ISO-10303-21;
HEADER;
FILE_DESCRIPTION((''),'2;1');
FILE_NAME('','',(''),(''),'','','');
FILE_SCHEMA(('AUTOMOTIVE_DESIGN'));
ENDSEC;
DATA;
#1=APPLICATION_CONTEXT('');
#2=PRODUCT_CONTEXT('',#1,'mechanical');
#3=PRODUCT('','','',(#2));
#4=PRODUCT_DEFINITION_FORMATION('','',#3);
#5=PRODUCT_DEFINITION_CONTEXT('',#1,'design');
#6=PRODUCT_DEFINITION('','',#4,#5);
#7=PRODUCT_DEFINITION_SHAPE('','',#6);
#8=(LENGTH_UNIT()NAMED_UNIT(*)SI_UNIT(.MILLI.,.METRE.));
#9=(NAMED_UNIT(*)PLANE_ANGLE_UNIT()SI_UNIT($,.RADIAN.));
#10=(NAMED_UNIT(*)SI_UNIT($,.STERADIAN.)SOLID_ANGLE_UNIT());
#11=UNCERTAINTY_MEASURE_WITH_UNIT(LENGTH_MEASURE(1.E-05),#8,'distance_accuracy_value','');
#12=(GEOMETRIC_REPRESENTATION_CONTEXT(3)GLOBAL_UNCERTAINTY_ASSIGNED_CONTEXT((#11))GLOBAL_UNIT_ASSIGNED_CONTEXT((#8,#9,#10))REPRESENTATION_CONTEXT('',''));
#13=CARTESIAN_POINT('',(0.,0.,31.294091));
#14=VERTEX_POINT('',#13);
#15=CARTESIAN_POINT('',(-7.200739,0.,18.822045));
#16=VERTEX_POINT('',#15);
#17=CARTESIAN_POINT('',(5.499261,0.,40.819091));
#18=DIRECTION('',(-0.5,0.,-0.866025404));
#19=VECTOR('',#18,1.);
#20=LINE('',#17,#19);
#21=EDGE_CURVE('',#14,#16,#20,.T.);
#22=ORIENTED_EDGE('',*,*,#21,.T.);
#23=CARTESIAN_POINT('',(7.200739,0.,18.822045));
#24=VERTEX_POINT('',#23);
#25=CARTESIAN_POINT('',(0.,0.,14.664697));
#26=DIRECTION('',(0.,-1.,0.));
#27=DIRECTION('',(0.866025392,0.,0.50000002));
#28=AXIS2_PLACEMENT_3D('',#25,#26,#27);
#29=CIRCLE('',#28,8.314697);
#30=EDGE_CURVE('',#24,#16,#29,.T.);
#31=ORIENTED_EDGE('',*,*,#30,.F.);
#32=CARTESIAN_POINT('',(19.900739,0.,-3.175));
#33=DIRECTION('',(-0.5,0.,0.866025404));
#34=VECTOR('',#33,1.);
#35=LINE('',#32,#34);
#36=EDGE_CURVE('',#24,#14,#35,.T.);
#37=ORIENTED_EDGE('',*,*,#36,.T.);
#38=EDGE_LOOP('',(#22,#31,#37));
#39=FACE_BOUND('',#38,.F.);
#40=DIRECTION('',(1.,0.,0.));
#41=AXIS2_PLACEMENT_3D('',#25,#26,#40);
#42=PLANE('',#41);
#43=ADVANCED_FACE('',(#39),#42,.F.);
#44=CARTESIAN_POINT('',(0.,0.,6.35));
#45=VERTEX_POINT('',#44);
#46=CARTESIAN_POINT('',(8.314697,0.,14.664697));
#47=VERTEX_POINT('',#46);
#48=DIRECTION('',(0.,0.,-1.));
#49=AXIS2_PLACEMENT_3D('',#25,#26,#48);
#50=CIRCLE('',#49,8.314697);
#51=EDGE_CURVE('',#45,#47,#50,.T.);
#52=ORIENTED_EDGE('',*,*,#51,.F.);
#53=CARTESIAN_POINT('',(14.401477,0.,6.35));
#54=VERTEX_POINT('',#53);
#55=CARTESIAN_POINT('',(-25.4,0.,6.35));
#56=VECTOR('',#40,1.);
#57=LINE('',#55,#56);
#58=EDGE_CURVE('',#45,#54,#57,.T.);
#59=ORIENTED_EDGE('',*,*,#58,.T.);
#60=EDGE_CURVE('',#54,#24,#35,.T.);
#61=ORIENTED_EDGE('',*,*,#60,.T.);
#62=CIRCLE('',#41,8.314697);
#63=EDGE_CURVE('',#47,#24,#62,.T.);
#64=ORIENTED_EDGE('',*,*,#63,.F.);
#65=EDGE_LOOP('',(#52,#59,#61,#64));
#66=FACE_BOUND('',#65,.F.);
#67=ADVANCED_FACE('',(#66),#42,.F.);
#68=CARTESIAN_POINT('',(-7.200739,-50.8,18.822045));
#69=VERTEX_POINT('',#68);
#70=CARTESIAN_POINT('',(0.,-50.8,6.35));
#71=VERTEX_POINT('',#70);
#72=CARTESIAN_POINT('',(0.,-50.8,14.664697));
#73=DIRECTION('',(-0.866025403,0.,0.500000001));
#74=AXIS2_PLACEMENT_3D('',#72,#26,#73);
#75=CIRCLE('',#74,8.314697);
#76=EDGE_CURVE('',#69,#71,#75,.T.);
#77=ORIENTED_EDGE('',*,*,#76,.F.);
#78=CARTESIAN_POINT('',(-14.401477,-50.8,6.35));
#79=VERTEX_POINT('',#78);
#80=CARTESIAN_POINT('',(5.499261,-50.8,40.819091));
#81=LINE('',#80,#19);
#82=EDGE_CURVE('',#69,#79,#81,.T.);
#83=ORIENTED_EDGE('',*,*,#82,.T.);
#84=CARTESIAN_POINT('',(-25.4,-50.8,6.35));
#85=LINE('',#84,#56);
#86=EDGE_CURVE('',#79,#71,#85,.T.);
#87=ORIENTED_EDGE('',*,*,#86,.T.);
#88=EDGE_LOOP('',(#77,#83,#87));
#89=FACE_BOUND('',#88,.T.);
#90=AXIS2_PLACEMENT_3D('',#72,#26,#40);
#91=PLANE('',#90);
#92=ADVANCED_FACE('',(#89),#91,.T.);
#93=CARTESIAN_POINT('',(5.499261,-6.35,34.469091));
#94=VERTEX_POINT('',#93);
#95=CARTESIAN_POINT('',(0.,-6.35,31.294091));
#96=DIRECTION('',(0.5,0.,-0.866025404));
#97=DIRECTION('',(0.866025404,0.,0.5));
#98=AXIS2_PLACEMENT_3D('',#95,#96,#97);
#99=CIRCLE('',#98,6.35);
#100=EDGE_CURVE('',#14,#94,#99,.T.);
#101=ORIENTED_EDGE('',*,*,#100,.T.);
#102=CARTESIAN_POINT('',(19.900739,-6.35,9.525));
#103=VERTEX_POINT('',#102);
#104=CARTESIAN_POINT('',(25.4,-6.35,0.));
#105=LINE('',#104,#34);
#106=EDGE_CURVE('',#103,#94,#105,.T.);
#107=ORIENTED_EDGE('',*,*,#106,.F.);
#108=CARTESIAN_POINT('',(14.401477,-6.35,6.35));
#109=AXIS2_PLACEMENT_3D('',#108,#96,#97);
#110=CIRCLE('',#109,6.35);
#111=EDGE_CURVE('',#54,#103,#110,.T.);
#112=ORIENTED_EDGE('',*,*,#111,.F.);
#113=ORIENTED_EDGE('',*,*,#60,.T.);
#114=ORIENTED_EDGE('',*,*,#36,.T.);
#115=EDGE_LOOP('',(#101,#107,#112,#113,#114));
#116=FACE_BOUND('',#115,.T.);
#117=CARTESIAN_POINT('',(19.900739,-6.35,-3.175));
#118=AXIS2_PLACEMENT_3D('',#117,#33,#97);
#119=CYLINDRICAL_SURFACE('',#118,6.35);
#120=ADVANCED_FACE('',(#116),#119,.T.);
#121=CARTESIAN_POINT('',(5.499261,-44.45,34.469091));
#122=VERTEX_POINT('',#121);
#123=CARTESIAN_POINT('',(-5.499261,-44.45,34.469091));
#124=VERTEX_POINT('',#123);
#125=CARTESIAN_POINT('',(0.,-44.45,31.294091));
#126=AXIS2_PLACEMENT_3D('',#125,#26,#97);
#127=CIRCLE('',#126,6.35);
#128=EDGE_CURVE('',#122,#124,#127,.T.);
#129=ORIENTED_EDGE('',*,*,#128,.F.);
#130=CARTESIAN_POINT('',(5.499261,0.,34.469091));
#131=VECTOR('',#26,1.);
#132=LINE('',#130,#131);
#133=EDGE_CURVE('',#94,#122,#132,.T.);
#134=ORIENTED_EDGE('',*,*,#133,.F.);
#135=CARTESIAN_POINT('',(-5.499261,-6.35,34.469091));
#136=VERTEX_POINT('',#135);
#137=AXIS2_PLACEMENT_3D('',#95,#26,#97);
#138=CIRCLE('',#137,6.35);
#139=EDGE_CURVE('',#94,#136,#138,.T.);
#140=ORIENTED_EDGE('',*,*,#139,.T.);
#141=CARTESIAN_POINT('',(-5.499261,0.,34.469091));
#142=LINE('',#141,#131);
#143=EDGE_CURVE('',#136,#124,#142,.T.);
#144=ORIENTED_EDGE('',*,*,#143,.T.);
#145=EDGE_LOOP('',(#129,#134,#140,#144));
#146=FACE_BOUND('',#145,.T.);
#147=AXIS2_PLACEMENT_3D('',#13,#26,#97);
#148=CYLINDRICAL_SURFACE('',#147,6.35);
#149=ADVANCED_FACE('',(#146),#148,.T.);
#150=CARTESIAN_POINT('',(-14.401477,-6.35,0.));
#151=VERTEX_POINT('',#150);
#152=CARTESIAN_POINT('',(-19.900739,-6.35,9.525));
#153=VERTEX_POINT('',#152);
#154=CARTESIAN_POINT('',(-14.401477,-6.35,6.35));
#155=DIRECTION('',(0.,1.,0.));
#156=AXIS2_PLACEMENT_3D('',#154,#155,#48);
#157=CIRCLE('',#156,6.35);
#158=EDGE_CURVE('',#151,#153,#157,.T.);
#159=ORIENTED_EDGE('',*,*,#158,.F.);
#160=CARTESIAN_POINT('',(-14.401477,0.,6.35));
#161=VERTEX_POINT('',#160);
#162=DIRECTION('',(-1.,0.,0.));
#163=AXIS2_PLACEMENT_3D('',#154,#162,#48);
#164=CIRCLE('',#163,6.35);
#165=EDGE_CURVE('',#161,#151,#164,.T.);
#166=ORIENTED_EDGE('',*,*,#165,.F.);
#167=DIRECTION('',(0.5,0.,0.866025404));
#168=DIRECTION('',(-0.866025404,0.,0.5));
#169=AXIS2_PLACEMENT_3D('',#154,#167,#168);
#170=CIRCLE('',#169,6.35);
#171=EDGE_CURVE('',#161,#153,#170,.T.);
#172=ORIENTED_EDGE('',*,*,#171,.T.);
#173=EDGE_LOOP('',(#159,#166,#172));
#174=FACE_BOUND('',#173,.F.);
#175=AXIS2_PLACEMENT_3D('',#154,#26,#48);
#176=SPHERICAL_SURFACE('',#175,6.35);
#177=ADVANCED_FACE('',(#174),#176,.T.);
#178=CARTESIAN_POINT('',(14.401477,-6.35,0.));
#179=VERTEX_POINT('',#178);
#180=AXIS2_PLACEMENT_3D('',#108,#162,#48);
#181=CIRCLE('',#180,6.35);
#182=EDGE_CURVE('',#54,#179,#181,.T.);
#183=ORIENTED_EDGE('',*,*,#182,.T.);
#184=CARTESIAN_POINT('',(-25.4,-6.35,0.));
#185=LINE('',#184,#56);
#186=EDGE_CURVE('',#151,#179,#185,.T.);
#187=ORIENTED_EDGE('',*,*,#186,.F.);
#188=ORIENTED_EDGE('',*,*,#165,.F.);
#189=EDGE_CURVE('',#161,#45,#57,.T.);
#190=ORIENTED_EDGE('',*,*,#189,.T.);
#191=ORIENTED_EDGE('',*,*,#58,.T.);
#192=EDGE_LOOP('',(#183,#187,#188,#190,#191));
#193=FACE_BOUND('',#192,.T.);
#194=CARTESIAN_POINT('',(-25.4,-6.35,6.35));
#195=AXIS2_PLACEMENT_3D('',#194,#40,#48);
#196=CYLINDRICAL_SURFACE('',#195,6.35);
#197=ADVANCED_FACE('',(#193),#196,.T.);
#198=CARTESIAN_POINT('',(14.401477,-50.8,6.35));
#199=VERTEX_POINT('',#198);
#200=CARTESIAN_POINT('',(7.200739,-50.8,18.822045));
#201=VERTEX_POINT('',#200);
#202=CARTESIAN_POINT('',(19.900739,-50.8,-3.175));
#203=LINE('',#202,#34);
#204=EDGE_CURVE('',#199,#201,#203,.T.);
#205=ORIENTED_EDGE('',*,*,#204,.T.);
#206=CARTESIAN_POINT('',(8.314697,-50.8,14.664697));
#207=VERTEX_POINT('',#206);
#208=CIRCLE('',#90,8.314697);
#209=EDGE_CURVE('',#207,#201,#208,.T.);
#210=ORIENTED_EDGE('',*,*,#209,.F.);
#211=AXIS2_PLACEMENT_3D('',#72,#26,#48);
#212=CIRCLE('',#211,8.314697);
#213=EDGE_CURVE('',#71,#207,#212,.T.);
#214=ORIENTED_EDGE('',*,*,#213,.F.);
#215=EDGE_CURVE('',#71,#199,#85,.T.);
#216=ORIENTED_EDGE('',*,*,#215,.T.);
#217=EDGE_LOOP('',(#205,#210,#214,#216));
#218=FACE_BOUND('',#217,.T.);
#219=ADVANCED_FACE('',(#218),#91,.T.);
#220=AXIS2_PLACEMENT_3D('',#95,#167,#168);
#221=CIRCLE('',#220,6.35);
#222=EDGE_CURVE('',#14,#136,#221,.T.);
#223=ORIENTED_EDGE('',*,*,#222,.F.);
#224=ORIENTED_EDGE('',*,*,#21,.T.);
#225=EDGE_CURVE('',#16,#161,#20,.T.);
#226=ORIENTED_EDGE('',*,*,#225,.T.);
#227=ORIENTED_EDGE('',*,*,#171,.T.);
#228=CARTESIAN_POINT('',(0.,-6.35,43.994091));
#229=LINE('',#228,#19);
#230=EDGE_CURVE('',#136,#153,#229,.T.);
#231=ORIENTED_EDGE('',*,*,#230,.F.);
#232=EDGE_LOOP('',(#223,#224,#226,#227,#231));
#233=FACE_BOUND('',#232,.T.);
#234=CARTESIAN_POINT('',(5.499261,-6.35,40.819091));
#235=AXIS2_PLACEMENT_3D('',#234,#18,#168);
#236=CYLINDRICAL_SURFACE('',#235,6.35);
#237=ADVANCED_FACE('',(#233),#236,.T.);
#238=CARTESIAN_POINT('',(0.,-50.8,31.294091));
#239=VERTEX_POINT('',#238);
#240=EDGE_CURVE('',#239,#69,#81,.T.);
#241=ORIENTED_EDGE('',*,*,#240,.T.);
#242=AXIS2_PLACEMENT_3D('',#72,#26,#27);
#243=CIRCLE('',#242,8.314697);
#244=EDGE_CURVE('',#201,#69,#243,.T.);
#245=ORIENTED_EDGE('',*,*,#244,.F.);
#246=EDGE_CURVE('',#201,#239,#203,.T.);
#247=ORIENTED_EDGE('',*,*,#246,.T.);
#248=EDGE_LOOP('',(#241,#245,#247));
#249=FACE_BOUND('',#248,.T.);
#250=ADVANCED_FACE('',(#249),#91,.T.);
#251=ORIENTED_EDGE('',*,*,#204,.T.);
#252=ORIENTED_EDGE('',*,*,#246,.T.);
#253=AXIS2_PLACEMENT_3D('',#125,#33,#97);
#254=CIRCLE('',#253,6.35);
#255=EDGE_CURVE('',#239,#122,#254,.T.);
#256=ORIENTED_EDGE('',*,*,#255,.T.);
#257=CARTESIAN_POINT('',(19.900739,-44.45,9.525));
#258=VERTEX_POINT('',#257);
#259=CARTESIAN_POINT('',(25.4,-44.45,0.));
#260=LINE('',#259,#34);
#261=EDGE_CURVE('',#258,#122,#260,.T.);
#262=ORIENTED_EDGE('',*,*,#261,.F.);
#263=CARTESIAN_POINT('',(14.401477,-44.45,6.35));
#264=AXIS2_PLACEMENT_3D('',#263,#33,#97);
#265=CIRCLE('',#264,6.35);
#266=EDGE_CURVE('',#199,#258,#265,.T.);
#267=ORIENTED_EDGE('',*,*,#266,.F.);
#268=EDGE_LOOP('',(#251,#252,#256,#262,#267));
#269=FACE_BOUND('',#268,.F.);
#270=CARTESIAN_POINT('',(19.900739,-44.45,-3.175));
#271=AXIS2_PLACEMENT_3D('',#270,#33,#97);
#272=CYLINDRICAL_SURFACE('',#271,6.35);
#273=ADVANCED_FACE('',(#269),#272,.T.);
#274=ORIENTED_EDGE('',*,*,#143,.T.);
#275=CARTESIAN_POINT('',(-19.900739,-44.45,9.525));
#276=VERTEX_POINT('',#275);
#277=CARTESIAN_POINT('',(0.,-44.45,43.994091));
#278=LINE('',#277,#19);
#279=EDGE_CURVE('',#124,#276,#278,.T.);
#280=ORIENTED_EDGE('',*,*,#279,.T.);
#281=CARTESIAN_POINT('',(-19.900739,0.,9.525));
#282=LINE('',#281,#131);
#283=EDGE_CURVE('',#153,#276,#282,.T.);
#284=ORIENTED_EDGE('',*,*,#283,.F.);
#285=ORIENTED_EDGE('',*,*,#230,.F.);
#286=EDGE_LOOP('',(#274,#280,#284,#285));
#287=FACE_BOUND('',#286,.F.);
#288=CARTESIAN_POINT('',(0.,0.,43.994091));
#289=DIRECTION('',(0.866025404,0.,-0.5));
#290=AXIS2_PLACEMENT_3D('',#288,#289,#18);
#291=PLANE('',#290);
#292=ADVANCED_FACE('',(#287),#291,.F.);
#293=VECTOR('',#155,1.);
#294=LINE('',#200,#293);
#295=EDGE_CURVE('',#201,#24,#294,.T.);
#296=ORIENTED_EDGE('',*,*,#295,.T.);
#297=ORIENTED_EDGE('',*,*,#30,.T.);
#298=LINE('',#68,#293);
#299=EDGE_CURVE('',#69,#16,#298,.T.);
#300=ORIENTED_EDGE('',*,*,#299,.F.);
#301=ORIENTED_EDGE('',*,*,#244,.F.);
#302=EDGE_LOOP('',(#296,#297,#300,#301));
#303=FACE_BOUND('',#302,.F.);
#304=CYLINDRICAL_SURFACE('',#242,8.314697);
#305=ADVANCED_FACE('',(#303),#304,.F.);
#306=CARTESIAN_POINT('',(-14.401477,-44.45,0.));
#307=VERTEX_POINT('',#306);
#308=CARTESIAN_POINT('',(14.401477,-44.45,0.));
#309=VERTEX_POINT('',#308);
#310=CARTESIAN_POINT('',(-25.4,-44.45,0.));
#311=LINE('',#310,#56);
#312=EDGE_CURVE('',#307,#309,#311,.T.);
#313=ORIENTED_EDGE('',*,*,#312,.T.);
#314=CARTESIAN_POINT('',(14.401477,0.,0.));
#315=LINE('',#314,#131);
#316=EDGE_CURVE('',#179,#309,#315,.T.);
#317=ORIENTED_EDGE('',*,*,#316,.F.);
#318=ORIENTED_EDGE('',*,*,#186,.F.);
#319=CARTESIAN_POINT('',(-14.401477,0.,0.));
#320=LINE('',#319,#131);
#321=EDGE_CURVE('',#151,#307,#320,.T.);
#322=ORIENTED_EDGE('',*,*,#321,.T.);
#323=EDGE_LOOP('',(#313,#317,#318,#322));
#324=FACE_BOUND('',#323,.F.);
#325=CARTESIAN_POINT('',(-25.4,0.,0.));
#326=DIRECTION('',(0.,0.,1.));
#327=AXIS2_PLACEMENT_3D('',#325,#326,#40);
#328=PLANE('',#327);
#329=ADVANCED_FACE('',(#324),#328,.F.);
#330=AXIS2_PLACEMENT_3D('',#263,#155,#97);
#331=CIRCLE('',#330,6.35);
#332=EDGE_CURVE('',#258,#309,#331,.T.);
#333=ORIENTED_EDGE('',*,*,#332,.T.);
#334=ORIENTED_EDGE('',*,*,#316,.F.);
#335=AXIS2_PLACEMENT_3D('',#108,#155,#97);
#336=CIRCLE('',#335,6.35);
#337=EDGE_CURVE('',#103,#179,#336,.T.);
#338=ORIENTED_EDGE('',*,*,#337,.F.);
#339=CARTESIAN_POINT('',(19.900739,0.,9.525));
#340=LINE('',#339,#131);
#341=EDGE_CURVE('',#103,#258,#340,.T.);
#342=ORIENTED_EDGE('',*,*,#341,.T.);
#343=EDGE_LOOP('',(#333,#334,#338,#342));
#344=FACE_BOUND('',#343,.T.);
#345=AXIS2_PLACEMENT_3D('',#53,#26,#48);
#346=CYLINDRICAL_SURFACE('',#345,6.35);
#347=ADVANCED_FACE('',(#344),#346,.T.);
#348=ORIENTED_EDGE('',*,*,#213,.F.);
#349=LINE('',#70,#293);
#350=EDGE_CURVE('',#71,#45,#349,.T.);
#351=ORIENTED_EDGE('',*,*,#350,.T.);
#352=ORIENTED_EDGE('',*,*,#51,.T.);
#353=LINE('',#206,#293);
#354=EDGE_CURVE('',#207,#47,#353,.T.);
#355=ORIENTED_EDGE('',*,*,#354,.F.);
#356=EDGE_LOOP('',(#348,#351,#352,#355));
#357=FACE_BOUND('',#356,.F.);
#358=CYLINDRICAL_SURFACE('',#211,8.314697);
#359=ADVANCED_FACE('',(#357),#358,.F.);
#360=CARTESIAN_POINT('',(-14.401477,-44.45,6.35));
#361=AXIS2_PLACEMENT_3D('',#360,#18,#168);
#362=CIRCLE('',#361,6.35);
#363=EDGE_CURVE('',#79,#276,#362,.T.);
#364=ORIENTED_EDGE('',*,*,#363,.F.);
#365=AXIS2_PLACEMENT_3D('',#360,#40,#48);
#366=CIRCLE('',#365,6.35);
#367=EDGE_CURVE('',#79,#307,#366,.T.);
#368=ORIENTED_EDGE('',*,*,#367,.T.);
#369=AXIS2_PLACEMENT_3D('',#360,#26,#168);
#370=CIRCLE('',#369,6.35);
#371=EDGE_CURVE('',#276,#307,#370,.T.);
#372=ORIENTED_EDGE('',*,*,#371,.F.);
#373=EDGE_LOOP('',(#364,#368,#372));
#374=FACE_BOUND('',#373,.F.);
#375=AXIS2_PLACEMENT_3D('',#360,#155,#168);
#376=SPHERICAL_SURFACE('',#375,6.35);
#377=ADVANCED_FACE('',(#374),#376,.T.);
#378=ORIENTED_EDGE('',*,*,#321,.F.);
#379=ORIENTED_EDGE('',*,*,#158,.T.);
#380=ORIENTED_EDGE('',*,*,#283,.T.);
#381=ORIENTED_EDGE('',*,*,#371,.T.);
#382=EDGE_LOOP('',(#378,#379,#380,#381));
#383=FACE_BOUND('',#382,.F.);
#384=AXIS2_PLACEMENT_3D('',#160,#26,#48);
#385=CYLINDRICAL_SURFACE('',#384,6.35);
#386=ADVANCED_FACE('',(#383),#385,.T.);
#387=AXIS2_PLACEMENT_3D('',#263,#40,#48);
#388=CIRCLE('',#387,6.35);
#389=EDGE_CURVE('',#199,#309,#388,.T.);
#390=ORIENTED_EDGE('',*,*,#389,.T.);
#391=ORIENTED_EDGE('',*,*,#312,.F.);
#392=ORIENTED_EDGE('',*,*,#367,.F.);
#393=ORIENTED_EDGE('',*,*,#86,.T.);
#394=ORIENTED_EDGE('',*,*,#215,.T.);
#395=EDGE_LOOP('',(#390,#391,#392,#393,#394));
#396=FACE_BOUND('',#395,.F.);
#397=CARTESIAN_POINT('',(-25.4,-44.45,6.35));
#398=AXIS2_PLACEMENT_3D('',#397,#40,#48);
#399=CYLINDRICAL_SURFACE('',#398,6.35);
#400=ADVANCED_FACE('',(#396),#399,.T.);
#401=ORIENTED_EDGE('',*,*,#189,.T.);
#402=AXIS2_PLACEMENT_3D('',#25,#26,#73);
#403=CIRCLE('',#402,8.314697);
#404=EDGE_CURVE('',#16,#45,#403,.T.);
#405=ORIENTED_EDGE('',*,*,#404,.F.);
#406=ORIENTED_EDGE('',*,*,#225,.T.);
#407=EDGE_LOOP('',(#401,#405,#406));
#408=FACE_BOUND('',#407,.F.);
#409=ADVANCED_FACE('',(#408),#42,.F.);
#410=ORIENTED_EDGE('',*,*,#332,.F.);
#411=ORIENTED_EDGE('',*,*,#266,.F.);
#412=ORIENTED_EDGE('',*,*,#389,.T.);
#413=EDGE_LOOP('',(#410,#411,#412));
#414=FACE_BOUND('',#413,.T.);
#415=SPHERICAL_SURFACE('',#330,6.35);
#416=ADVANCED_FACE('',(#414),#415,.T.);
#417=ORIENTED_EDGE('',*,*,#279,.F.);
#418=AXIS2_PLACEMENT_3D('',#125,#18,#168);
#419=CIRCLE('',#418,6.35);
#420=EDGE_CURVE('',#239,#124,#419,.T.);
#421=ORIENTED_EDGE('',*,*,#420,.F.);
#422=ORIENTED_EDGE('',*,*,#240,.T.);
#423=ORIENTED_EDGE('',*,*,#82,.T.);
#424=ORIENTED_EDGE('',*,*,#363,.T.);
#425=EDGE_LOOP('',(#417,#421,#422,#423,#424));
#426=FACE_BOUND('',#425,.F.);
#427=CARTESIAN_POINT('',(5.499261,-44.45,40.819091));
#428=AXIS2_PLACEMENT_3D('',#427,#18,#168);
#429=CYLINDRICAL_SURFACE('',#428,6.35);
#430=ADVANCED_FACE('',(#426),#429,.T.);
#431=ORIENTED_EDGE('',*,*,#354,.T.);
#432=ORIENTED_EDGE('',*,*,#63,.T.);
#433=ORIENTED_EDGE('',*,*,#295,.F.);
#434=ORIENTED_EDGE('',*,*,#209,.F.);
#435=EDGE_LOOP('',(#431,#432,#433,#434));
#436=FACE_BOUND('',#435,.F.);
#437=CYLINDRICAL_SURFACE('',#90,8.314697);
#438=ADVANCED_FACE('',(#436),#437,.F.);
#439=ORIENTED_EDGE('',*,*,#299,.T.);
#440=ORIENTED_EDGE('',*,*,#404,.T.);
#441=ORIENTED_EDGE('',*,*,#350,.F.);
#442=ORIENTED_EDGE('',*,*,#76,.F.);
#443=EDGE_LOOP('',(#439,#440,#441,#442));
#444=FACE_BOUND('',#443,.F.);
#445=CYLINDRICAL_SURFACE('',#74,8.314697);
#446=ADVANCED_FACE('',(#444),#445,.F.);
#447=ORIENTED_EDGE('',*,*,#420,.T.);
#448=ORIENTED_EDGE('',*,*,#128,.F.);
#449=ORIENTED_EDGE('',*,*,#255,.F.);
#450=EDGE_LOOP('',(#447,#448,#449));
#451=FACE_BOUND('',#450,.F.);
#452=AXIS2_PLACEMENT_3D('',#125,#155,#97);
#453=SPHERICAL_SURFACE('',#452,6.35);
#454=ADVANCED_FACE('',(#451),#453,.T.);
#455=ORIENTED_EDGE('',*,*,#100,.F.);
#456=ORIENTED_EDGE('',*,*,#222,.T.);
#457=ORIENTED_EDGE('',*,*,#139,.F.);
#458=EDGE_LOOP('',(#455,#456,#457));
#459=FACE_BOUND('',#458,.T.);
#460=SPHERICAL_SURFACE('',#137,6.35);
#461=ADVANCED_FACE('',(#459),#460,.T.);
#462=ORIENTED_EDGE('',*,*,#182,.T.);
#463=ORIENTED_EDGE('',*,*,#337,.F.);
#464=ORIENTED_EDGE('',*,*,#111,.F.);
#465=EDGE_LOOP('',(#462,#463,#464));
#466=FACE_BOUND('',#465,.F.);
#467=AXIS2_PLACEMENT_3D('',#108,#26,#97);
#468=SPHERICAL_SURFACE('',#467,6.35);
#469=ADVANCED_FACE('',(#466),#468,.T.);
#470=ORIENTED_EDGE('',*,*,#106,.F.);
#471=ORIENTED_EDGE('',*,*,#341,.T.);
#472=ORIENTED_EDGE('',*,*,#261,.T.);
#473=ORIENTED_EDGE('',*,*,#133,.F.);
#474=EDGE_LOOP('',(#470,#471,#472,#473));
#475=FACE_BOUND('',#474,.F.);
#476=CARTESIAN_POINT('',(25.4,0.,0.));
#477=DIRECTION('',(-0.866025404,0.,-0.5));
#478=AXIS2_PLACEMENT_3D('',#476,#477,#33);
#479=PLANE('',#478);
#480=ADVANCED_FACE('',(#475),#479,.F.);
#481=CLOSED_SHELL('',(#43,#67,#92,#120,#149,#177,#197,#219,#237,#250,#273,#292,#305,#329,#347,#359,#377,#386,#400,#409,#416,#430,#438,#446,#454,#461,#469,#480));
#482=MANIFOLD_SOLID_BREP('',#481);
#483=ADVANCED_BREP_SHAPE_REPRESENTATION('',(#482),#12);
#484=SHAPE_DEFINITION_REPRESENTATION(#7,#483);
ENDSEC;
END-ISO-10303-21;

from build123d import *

# Parameters (mm, degrees)
F1_DEPTH      = 50.8
F2_R          = 6.35
F4_DEPTH      = 68.834
F4_DEPTH_BACK = 105


# Not quite as in the source:
# - an extrude ends at something that could not be found from the text; its depth is read off the source's solid


with BuildPart() as f1:
    # F0 (on Front) → F1 (new body)
    with BuildSketch(Plane.XZ):
        Polygon((-25.4, 0), (0, 0), (25.4, 0), (0, 43.9940905122), align=None)
    extrude(amount=F1_DEPTH)

    # F2
    f2_edges = [f1.edges().sort_by_distance(p)[0] for p in [
        (0, -25.4, 43.994091),
        (12.7, -50.8, 21.997045),
        (-12.7, -50.8, 21.997045),
        (0, -50.8, 0),
        (25.4, -25.4, 0),
        (12.7, 0, 21.997045),
        (0, 0, 0),
        (-12.7, 0, 21.997045),
        (-25.4, -25.4, 0),
    ]]
    fillet(f2_edges, radius=F2_R)

    # F3 (on face) → F4 (cut, two sides)
    with BuildSketch(Plane.XZ.offset(50.8)) as f4_sk:
        with BuildLine():
            ThreePointArc((0, 6.35), (5.8793785172, 8.7853183202), (8.3146968374, 14.6646968374))
            ThreePointArc((8.3146968374, 14.6646968374), (8.0313803879, 16.8166988268), (7.200738589, 18.822045424))
            ThreePointArc((7.200738589, 18.822045424), (-9.37e-08, 22.9793936748), (-7.2007386828, 18.8220452616))
            ThreePointArc((-7.2007386828, 18.8220452616), (-7.2007386876, 10.5073484215), (0, 6.35))
        make_face()
    extrude(amount=-F4_DEPTH, mode=Mode.SUBTRACT)
    extrude(f4_sk.sketch, amount=F4_DEPTH_BACK, mode=Mode.SUBTRACT)


solid = f1.part
